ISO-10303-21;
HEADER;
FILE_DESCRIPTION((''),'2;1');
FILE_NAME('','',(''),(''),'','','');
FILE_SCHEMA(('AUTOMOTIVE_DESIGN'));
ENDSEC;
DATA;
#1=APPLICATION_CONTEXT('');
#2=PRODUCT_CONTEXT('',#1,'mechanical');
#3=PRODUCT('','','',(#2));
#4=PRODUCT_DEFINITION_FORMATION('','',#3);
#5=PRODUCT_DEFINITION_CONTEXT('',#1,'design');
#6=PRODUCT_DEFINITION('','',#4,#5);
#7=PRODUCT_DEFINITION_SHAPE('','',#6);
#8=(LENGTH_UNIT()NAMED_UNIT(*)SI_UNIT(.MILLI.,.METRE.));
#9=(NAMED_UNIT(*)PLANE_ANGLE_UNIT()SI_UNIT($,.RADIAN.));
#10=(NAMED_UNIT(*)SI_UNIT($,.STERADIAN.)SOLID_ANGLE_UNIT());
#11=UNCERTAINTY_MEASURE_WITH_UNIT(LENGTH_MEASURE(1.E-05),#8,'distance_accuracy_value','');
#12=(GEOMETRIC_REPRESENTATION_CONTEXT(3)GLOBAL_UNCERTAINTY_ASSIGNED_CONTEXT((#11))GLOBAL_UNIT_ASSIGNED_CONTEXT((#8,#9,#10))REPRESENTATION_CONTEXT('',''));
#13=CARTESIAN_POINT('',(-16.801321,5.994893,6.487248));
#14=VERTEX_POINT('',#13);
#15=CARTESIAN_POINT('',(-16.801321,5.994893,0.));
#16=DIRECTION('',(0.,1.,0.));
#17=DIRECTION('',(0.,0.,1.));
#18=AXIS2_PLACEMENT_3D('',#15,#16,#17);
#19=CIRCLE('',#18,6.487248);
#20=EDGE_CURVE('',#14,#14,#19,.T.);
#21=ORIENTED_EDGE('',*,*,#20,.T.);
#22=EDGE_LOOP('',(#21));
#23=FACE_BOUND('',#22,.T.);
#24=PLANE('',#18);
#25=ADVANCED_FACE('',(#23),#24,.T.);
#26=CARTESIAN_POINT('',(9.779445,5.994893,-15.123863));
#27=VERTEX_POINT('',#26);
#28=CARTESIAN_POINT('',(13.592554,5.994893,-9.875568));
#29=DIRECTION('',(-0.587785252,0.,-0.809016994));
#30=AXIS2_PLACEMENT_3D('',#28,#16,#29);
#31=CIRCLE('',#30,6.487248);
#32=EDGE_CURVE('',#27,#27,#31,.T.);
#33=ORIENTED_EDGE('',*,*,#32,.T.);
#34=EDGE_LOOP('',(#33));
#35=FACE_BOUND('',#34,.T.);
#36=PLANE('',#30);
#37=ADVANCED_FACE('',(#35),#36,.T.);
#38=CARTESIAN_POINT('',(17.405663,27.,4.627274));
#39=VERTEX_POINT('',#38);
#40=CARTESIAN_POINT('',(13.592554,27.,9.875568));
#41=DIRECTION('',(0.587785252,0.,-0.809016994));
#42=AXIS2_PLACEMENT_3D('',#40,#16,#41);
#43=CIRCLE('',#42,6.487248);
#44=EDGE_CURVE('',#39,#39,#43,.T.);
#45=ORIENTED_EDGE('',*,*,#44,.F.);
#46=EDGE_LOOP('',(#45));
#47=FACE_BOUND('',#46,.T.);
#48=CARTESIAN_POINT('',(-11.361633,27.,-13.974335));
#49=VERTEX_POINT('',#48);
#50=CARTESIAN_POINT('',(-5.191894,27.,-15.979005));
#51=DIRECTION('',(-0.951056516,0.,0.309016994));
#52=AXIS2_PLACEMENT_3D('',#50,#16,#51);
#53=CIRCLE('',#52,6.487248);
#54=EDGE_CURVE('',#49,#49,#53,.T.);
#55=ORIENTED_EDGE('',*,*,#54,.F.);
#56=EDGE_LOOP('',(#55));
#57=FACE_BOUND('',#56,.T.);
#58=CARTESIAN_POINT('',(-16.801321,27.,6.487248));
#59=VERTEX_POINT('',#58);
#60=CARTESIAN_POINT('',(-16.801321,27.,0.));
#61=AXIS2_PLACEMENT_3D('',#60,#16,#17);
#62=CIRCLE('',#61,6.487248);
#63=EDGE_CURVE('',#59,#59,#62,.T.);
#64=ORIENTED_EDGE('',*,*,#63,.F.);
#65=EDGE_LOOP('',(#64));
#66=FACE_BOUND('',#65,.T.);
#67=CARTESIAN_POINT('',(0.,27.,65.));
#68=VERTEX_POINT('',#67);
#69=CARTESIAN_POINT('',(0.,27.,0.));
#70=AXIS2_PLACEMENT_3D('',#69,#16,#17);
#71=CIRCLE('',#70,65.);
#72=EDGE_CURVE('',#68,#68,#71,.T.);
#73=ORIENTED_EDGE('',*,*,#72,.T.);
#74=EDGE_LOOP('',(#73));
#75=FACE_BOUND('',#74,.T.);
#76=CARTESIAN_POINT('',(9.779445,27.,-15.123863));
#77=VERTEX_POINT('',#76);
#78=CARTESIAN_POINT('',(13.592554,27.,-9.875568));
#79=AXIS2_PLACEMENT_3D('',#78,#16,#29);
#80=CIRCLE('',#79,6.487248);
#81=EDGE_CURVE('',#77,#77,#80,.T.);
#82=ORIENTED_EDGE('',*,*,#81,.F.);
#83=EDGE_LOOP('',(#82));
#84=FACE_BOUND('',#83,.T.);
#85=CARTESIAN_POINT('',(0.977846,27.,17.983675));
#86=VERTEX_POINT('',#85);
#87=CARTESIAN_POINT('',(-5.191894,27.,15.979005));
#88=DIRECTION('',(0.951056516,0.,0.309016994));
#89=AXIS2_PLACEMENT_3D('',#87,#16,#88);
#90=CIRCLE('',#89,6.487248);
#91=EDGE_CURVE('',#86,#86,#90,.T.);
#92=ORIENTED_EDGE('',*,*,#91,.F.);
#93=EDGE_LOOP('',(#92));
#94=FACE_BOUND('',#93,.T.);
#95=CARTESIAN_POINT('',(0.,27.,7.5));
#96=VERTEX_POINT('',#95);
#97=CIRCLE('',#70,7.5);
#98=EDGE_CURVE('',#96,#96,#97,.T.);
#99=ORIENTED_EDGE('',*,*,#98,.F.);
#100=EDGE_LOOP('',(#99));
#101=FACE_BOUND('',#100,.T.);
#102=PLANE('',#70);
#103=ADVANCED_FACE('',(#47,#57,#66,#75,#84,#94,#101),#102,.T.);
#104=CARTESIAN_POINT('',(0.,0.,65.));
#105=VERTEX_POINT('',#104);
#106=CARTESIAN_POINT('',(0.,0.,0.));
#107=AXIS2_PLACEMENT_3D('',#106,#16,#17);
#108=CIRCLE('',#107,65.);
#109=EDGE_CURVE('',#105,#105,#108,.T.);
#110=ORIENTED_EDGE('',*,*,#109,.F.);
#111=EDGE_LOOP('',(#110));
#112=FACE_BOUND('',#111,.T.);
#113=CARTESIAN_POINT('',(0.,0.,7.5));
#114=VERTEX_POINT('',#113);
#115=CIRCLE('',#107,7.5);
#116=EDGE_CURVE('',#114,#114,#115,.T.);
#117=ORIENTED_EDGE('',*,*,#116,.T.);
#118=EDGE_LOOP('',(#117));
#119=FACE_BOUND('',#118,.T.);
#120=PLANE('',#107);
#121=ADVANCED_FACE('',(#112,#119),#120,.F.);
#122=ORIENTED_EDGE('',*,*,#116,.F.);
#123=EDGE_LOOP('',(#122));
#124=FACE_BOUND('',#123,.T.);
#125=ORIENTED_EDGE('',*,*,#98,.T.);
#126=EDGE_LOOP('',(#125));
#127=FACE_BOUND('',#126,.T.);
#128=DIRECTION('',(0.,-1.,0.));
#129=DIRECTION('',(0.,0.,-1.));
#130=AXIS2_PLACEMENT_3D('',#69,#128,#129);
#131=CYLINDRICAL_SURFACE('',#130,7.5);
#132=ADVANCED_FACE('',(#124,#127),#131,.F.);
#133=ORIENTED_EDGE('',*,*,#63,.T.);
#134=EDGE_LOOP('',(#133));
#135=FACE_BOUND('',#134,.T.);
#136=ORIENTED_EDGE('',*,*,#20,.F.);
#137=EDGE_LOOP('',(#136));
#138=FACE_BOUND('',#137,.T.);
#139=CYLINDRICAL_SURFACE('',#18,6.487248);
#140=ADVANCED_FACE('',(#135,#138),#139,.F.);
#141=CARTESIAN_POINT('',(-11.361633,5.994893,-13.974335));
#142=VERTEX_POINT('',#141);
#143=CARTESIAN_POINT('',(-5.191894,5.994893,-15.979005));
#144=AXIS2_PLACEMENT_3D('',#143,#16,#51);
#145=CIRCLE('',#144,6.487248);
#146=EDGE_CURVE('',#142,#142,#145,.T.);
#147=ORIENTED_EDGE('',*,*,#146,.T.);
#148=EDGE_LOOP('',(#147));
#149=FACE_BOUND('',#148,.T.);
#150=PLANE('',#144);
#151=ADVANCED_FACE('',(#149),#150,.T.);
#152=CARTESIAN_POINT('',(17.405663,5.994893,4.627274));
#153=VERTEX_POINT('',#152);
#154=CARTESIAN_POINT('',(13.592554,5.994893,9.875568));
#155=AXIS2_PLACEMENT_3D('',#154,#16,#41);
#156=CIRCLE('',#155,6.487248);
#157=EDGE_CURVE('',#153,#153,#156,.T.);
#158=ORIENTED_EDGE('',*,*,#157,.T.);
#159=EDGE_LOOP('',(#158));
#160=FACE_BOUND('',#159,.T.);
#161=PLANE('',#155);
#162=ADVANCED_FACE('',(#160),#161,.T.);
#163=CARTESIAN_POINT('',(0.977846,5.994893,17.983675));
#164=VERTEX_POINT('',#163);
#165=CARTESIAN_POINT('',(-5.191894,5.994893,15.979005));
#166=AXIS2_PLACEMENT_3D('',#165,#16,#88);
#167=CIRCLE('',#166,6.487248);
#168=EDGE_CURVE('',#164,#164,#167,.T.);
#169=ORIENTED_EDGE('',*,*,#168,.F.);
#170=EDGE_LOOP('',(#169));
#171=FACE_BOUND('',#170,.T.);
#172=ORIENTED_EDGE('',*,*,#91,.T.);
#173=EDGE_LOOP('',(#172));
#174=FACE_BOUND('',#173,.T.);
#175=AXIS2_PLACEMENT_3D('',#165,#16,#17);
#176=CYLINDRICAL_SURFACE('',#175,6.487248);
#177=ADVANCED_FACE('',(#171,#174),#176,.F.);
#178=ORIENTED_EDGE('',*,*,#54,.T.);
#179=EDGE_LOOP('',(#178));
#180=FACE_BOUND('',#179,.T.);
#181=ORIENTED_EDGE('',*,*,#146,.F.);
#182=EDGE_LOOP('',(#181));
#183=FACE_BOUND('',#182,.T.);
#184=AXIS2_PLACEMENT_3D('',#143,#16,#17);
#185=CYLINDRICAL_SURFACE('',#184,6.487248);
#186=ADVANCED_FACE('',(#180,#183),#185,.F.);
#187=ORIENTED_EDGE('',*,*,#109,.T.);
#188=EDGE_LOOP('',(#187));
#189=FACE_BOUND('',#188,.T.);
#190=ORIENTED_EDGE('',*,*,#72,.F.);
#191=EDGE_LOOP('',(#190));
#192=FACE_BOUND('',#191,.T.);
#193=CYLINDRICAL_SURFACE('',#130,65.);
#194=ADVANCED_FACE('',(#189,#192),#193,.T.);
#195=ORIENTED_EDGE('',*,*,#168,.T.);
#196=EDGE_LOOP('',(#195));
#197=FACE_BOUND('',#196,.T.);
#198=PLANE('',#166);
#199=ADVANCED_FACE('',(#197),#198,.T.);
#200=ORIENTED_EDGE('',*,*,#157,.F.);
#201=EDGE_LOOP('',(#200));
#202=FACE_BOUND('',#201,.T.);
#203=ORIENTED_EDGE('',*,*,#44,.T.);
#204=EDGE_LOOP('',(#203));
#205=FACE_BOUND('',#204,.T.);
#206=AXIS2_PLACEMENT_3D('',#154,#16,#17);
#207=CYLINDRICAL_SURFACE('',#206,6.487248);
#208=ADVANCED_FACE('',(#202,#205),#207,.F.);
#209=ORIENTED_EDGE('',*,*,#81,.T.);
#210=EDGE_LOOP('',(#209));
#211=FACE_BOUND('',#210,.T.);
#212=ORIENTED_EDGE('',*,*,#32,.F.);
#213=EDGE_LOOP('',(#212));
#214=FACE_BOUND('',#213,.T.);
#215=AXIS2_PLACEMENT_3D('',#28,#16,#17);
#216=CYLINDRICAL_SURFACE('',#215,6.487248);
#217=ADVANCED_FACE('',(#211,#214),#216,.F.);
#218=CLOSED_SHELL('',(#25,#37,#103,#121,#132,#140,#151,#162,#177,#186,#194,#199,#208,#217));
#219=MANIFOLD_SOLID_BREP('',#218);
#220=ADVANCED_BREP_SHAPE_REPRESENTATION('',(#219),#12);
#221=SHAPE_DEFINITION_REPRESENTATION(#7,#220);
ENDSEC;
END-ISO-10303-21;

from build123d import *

# Parameters (mm, degrees)
SKETCH1_R           = 65
BOSS_EXTRUDE1_DEPTH = 27
SKETCH2_R           = 7.5
CUT_EXTRUDE1_DEPTH  = 96.807097858
SKETCH3_R           = 6.48724829
CUT_EXTRUDE2_DEPTH  = 21.005107189
CIRPATTERN1_COUNT   = 5


with BuildPart() as part:
    # Sketch1 → Boss-Extrude1 (new body)
    with BuildSketch(Plane(origin=(0, 0, 0), x_dir=(1, 0, 0), z_dir=(0, 1, 0))):
        Circle(SKETCH1_R)
    extrude(amount=BOSS_EXTRUDE1_DEPTH)

    # Sketch2 → Cut-Extrude1 (cut, through all)
    with BuildSketch(Plane(origin=(0, 0, 0), x_dir=(1, 0, 0), z_dir=(0, 1, 0))):
        Circle(SKETCH2_R)
    extrude(amount=CUT_EXTRUDE1_DEPTH, mode=Mode.SUBTRACT)

    # Sketch3 → Cut-Extrude2 (cut)
    with BuildSketch(Plane(origin=(0, 27, 0), x_dir=(1, 0, 0), z_dir=(0, 1, 0))):
        with Locations((-16.80132063, 0)):
            Circle(SKETCH3_R)
    cut_extrude2 = extrude(amount=-CUT_EXTRUDE2_DEPTH, mode=Mode.SUBTRACT)

    # CirPattern1: Cut-Extrude2 ×5 about axis
    cirpattern1_axis = Axis((0, 0, 0), (0, 1, 0))
    for i in range(1, CIRPATTERN1_COUNT):
        add(cut_extrude2.rotate(cirpattern1_axis, i * 360 / CIRPATTERN1_COUNT), mode=Mode.SUBTRACT)


solid = part.part
